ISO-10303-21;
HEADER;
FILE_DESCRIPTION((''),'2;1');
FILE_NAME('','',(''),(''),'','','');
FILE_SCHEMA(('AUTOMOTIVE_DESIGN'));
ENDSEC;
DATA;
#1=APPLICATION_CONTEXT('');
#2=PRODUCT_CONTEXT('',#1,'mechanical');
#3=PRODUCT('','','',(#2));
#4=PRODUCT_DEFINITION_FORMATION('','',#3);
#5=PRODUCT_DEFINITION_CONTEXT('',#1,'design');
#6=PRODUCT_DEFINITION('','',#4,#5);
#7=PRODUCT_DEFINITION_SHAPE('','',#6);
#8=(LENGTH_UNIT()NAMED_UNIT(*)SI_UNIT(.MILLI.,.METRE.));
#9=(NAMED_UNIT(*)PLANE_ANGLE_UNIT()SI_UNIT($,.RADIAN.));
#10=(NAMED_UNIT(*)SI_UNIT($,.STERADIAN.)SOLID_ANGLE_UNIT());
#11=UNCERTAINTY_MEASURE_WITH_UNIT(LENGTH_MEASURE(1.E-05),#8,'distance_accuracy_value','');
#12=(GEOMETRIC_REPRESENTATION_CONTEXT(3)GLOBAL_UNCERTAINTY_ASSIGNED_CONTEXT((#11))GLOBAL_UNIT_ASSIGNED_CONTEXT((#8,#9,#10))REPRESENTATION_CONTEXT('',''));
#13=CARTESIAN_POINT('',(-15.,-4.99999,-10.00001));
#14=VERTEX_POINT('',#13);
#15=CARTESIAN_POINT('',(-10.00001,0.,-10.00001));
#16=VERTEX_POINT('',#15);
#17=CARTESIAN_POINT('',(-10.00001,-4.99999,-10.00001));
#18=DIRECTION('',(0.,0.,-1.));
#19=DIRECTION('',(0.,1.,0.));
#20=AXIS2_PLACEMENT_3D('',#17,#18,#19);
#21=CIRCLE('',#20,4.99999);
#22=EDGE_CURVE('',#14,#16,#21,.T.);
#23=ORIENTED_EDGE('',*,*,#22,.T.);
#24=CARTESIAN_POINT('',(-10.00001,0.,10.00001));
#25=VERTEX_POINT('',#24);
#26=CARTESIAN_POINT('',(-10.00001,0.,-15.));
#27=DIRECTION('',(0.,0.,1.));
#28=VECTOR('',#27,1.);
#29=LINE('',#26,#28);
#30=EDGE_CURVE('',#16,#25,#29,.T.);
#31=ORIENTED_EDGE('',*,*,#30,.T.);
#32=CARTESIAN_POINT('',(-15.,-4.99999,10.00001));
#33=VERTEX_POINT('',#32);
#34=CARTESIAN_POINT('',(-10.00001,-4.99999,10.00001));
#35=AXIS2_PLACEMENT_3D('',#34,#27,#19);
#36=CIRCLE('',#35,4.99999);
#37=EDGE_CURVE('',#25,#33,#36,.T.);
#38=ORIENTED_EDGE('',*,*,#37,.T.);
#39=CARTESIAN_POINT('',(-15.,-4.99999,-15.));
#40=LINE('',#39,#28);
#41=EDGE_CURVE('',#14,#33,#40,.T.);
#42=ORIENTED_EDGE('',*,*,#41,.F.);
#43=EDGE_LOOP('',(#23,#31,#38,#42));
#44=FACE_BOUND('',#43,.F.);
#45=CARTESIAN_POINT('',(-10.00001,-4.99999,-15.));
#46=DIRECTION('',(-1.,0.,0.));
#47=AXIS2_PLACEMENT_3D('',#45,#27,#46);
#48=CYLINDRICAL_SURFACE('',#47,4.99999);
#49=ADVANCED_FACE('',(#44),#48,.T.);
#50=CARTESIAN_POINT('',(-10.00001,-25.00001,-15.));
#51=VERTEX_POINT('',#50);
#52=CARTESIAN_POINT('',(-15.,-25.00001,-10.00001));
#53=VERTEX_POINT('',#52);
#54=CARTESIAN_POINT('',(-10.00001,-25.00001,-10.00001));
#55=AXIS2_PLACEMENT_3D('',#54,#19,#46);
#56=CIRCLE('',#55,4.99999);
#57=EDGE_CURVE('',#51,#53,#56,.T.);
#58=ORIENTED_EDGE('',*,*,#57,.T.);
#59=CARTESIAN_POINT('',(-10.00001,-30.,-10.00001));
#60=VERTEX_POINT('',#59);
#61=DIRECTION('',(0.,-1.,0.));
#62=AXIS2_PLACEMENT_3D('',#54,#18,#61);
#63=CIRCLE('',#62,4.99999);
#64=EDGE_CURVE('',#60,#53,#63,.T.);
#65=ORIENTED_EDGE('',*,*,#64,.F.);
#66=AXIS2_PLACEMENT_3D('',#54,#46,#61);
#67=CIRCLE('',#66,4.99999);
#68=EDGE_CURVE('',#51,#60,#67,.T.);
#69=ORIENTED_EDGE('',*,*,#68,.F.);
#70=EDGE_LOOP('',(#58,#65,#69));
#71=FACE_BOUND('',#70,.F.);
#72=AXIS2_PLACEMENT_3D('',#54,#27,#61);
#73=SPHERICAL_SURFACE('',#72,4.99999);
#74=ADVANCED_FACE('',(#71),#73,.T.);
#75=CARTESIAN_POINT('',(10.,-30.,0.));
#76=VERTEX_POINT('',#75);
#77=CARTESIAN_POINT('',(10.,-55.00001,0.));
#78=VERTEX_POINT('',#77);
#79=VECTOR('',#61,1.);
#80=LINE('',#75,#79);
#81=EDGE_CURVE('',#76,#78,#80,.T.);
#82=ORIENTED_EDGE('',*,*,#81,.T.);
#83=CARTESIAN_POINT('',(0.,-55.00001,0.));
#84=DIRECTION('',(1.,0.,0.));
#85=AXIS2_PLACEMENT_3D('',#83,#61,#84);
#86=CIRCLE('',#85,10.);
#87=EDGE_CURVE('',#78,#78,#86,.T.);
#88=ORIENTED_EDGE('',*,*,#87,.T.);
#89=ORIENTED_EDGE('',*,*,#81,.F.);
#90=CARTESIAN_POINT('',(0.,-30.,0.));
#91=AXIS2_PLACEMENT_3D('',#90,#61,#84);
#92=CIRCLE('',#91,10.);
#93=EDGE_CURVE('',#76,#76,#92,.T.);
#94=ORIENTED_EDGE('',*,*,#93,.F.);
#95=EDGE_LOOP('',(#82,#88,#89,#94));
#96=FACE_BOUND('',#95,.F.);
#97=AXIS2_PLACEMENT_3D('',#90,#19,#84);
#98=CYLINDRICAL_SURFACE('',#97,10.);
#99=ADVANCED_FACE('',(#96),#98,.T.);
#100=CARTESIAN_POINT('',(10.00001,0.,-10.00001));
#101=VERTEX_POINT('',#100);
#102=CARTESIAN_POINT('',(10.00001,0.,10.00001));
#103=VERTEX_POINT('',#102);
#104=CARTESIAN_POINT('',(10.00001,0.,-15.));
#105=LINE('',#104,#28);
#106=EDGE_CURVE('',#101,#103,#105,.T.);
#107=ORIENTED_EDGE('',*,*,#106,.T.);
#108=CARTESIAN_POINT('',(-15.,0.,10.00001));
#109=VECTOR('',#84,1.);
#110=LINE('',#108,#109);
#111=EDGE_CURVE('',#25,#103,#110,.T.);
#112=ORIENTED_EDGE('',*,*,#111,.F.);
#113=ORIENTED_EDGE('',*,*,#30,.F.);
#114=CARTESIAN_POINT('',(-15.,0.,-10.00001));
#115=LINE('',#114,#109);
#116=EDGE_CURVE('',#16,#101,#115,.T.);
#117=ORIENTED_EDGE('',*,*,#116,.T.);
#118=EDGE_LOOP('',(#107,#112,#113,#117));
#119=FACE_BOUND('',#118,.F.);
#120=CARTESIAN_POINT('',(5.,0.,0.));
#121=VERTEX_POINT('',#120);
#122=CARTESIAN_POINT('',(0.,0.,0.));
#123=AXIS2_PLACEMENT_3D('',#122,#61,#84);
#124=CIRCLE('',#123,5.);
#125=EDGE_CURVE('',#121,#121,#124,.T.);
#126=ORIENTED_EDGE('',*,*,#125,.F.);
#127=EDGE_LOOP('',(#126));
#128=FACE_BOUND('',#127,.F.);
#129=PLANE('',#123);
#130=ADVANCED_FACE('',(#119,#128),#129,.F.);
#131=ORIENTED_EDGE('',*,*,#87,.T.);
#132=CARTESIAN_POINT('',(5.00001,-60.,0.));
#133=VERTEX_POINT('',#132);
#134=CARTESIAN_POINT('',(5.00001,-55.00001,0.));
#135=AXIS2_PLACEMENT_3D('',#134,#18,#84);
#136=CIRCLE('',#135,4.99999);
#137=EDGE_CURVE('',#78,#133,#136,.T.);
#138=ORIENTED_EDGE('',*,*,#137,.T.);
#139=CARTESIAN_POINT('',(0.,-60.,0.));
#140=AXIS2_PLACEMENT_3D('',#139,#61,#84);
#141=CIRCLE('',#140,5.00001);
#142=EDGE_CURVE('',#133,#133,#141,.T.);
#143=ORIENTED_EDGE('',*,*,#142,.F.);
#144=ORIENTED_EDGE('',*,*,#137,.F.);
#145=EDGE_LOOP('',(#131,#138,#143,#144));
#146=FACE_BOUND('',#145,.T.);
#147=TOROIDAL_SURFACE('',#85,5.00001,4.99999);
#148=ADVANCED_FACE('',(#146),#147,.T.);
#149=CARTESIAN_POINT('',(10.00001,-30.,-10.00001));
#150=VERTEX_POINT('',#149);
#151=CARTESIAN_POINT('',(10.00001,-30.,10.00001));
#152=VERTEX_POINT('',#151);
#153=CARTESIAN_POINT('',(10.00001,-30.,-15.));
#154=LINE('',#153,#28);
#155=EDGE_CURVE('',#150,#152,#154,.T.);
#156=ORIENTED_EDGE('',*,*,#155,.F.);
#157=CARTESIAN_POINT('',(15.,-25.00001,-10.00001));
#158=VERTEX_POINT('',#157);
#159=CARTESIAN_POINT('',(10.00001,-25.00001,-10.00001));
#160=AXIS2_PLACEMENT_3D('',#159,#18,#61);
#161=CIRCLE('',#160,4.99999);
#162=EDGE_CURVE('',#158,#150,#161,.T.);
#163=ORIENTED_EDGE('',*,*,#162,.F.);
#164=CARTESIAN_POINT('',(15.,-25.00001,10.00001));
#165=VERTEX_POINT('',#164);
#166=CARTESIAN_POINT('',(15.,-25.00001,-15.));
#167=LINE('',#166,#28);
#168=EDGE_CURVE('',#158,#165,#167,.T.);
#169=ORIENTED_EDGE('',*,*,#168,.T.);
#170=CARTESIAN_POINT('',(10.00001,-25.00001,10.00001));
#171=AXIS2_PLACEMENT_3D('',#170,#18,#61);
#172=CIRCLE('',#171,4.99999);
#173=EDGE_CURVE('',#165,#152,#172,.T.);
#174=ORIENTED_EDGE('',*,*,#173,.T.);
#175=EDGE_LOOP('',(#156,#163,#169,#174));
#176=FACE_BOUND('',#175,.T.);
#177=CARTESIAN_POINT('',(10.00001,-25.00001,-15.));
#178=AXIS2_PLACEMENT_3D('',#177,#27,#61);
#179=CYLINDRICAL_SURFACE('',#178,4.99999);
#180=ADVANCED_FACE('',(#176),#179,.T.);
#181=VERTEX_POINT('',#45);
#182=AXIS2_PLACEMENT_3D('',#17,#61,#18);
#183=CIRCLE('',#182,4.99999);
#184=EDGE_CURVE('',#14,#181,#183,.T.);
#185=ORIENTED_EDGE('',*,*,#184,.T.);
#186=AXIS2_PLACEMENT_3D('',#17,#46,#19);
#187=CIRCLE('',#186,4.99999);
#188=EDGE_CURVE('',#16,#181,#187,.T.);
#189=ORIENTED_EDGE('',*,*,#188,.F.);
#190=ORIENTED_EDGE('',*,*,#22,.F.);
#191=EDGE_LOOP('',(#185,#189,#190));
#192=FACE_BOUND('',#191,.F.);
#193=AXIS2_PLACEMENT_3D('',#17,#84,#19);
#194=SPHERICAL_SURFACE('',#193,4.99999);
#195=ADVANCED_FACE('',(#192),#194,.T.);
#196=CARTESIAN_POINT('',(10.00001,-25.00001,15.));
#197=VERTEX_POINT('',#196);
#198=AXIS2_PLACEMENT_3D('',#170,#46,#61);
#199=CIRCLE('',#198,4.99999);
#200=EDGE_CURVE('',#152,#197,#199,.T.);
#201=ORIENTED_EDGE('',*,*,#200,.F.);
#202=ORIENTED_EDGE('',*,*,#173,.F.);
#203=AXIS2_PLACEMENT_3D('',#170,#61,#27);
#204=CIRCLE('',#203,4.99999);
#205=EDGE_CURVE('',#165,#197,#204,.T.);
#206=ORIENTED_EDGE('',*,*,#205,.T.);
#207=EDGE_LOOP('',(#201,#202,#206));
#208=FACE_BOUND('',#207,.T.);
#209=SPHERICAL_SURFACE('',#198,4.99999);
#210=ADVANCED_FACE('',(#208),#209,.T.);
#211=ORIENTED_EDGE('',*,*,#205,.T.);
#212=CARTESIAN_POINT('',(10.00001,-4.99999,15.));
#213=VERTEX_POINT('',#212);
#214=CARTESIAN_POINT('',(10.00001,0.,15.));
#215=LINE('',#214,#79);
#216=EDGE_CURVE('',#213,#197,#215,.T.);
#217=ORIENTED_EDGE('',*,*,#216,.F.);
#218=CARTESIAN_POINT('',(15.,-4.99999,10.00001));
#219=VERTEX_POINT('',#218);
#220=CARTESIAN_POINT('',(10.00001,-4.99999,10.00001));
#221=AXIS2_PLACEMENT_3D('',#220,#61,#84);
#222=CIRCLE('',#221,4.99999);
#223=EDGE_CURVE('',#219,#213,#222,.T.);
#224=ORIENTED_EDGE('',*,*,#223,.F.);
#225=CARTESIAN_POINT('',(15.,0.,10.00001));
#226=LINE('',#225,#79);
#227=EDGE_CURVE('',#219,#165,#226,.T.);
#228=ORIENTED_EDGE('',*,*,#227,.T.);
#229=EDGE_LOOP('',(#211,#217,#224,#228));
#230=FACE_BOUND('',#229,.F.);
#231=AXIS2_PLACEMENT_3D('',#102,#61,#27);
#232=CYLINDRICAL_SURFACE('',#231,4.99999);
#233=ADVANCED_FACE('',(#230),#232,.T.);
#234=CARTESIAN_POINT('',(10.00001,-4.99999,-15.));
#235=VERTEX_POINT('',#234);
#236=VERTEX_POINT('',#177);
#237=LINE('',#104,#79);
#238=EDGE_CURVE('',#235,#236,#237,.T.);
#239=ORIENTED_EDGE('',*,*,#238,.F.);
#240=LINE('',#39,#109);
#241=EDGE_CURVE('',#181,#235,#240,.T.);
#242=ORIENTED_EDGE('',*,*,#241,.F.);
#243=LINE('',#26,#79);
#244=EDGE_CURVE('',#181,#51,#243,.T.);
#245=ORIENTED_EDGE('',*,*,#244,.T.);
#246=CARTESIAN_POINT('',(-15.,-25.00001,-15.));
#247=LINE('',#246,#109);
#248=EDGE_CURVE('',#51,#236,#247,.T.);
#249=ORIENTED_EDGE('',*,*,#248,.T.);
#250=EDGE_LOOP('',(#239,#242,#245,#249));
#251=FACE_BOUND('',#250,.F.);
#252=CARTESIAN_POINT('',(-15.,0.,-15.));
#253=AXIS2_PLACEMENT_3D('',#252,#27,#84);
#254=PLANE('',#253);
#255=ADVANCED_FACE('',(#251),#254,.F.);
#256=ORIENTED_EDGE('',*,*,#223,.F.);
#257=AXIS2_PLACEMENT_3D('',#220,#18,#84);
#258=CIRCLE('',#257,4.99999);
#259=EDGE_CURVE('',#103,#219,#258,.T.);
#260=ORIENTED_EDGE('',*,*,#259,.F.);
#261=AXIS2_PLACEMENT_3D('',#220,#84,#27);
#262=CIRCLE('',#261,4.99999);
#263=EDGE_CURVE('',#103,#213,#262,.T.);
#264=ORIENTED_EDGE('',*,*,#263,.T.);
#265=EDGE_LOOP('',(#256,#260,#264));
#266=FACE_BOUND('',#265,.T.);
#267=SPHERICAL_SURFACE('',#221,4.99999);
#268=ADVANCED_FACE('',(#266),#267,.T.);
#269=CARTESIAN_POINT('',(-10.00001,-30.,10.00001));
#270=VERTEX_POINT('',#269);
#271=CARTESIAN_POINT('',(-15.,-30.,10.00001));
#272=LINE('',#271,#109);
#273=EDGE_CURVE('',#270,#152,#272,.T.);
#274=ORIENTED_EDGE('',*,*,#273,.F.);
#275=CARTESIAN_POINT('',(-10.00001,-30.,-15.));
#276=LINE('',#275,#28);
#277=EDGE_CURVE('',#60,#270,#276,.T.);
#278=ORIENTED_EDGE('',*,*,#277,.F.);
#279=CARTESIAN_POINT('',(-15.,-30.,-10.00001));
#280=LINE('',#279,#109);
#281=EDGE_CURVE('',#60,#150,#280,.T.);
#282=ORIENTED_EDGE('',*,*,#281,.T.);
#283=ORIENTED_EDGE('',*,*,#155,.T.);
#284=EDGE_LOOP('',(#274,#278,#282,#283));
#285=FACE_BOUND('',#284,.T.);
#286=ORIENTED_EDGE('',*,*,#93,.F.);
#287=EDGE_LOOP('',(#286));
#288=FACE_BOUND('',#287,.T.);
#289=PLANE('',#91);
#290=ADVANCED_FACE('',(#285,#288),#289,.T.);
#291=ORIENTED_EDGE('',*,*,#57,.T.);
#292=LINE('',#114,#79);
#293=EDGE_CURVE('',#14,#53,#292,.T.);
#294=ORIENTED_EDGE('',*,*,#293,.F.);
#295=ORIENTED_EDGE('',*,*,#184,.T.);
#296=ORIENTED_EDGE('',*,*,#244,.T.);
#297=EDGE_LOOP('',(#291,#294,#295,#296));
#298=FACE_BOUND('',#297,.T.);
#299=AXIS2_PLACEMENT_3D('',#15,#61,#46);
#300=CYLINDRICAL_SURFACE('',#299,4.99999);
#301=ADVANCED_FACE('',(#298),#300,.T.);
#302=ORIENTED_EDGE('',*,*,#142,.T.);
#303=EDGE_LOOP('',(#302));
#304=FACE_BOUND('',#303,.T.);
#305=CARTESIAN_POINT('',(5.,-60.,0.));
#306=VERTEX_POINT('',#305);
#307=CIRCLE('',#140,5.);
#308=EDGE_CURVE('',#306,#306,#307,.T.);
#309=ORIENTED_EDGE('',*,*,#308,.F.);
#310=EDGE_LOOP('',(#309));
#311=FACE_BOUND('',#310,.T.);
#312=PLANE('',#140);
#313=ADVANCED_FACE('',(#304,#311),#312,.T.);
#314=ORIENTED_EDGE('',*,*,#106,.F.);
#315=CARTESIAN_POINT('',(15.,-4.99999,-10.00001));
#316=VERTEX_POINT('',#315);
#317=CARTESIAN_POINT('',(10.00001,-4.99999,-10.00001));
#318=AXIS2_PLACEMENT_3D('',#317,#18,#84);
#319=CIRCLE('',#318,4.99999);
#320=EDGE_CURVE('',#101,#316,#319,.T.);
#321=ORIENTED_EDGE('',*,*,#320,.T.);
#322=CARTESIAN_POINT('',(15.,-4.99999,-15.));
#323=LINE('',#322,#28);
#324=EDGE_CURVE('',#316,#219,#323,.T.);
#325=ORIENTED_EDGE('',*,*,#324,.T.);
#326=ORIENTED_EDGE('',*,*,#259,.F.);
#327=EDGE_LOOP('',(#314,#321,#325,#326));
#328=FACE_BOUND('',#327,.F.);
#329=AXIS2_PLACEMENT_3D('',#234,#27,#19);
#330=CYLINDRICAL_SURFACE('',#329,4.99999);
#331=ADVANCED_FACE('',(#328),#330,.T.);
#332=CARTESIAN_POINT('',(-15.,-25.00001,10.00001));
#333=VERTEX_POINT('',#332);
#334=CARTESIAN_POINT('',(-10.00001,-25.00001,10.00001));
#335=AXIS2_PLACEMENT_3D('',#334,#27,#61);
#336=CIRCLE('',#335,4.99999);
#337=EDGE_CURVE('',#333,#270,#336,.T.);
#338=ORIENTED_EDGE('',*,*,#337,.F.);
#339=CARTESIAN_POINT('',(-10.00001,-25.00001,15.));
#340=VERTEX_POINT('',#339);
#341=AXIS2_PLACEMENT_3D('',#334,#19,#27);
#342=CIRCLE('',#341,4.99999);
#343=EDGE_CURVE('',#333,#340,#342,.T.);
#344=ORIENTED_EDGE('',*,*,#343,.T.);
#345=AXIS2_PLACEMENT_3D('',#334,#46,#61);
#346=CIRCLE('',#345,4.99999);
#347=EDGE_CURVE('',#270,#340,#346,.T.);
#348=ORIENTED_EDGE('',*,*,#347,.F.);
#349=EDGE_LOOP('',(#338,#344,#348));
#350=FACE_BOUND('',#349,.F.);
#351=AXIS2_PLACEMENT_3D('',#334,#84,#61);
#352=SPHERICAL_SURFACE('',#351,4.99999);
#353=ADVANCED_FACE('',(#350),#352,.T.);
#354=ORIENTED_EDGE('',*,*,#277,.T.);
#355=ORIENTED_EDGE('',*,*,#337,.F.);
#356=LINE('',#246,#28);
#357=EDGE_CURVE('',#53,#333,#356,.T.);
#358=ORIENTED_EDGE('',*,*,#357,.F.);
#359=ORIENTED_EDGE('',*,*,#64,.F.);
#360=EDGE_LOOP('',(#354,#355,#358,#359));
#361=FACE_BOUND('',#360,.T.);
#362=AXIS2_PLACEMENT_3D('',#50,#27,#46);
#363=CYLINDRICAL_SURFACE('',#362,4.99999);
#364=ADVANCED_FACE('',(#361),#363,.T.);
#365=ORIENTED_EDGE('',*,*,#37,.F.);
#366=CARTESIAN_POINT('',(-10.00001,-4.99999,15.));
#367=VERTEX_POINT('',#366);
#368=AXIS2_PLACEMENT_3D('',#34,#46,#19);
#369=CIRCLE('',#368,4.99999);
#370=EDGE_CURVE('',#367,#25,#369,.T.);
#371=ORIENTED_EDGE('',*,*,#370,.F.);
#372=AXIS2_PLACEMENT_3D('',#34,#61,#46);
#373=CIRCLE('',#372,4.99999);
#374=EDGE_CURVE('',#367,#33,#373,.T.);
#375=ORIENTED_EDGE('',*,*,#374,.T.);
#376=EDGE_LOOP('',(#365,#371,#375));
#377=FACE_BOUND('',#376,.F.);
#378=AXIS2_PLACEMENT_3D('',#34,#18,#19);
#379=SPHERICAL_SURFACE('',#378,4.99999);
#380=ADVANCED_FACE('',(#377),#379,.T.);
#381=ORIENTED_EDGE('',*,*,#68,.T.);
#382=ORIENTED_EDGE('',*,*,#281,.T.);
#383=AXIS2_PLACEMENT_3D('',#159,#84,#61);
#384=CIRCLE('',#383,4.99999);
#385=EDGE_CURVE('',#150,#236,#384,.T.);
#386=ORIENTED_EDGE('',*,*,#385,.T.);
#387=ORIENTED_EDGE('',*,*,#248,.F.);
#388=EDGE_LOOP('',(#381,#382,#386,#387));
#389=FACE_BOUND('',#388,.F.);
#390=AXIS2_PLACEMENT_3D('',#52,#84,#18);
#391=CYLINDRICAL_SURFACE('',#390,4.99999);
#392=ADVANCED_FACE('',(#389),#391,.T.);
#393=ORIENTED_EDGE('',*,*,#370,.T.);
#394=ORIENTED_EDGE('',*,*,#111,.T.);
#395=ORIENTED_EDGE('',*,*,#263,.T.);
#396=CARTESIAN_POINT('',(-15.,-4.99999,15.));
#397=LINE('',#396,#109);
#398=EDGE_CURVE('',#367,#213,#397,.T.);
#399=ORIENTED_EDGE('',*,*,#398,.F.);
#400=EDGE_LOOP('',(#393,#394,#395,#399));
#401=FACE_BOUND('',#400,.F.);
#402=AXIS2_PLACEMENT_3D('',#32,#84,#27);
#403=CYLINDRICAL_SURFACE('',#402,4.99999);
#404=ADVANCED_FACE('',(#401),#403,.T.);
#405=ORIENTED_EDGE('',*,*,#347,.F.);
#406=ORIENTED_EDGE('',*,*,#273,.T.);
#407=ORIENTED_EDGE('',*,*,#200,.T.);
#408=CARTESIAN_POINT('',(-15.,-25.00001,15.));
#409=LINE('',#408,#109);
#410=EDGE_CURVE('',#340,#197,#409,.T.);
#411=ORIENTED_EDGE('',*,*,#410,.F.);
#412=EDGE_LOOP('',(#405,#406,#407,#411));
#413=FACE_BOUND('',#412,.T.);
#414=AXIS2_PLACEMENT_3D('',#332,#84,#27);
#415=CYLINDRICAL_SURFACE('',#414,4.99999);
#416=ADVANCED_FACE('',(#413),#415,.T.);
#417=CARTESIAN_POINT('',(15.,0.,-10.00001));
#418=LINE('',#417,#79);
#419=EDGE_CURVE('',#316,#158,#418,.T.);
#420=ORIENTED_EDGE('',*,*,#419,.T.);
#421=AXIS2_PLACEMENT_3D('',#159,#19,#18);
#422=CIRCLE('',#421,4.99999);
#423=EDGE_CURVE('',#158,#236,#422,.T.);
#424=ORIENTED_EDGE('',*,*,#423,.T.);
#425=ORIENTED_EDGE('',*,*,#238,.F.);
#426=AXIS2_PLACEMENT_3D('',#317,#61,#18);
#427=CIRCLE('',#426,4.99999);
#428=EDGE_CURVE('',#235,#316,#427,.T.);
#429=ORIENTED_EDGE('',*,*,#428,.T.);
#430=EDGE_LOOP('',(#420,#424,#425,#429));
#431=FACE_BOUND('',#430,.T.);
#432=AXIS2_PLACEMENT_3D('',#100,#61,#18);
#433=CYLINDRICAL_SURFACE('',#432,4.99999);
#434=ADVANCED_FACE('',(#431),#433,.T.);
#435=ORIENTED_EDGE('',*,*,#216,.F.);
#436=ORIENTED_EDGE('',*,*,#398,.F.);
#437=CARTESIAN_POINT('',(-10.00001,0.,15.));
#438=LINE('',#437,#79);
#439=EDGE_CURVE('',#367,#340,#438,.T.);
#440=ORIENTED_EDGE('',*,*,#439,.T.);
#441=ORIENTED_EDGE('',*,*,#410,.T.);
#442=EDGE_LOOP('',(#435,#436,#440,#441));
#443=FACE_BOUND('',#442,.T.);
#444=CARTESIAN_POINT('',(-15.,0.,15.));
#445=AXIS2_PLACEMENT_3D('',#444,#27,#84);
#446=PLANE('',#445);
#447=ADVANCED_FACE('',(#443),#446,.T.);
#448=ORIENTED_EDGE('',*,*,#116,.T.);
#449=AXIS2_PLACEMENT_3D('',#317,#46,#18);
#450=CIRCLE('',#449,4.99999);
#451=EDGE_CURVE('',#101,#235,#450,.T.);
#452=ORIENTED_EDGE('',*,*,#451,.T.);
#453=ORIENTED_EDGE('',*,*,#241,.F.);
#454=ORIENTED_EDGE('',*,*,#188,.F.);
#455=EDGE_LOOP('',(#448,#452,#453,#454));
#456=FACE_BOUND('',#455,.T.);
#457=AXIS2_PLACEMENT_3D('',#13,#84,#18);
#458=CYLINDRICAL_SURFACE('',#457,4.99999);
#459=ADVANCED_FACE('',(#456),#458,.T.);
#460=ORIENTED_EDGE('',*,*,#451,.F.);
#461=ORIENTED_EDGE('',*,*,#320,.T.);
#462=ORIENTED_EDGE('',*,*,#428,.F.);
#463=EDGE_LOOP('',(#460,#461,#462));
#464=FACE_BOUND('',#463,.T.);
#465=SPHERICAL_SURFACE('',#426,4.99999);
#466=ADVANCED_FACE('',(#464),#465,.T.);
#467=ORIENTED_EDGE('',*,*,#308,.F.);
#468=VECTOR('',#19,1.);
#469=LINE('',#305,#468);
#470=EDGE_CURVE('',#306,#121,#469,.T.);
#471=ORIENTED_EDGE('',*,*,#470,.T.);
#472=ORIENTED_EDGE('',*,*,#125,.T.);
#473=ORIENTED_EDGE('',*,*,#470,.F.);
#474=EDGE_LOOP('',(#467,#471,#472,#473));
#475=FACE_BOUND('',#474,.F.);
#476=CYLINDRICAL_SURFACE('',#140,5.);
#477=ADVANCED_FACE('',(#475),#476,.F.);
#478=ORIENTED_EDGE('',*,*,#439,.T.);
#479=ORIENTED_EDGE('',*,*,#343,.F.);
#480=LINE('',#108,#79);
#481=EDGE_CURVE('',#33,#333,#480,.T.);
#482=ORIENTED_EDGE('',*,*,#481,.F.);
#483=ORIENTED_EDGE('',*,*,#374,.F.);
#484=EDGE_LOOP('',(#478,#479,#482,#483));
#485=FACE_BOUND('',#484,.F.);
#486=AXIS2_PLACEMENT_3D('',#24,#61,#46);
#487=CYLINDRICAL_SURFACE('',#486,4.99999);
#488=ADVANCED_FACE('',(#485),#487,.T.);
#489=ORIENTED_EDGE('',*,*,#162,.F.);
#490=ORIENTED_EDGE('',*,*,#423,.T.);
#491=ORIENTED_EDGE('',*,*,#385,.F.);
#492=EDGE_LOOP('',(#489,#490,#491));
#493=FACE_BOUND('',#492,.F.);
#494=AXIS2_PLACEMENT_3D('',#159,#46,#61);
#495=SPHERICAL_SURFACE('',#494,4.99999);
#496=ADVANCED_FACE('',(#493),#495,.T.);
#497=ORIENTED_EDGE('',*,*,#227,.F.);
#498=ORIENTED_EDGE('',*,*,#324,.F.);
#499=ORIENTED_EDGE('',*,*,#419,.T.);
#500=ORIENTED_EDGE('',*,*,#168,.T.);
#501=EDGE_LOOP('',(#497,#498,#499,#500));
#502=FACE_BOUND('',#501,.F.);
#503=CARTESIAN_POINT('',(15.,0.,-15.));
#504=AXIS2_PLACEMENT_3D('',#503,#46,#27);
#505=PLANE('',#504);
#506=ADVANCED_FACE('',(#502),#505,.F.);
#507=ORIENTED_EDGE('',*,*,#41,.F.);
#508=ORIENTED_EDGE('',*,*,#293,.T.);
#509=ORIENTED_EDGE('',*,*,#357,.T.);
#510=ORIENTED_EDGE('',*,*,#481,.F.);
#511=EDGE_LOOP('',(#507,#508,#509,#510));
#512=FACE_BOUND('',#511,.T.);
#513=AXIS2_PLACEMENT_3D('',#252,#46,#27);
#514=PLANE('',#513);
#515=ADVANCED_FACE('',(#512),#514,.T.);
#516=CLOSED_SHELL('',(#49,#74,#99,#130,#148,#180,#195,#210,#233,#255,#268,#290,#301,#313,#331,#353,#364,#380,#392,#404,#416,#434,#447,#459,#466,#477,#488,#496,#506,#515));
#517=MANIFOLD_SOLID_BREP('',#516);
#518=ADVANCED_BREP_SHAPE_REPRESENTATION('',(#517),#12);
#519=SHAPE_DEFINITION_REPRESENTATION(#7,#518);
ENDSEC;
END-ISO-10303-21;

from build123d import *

# Parameters (mm, degrees)
F0_W     = 30
F0_H     = 30
F1_DEPTH = 30
F2_R     = 10
F3_DEPTH = 30
F4_R     = 5
F5_DEPTH = 60.001
F6_R     = 4.99999


# Not quite as in the source:
# - a fillet or chamfer is up to 0.001 mm smaller than in the source, because OpenCascade refuses the exact size


with BuildPart() as f1:
    # F0 (on Front) → F1 (new body)
    with BuildSketch(Plane.XZ):
        Rectangle(F0_W, F0_H)
    extrude(amount=F1_DEPTH)

    # F2 (on face) → F3 (join)
    with BuildSketch(Plane.XZ.offset(30)):
        Circle(F2_R)
    extrude(amount=F3_DEPTH)

    # F4 (on face) → F5 (cut, through all)
    with BuildSketch(Plane.XZ.offset(60)):
        Circle(F4_R)
    extrude(amount=-F5_DEPTH, mode=Mode.SUBTRACT)

    # F6 (radius 5 in the source; OpenCascade refuses exactly that, so slightly less here)
    f6_edges = [f1.edges().sort_by_distance(p)[0] for p in [
        (0, -30, 15),
        (-15, -30, 0),
        (0, -30, -15),
        (15, -30, 0),
        (15, -15, 15),
        (15, -15, -15),
        (0, 0, -15),
        (-15, 0, 0),
        (15, 0, 0),
        (0, 0, 15),
        (-15, -15, 15),
        (-10, -60, 0),
        (-15, -15, -15),
    ]]
    fillet(f6_edges, radius=F6_R)


solid = f1.part
